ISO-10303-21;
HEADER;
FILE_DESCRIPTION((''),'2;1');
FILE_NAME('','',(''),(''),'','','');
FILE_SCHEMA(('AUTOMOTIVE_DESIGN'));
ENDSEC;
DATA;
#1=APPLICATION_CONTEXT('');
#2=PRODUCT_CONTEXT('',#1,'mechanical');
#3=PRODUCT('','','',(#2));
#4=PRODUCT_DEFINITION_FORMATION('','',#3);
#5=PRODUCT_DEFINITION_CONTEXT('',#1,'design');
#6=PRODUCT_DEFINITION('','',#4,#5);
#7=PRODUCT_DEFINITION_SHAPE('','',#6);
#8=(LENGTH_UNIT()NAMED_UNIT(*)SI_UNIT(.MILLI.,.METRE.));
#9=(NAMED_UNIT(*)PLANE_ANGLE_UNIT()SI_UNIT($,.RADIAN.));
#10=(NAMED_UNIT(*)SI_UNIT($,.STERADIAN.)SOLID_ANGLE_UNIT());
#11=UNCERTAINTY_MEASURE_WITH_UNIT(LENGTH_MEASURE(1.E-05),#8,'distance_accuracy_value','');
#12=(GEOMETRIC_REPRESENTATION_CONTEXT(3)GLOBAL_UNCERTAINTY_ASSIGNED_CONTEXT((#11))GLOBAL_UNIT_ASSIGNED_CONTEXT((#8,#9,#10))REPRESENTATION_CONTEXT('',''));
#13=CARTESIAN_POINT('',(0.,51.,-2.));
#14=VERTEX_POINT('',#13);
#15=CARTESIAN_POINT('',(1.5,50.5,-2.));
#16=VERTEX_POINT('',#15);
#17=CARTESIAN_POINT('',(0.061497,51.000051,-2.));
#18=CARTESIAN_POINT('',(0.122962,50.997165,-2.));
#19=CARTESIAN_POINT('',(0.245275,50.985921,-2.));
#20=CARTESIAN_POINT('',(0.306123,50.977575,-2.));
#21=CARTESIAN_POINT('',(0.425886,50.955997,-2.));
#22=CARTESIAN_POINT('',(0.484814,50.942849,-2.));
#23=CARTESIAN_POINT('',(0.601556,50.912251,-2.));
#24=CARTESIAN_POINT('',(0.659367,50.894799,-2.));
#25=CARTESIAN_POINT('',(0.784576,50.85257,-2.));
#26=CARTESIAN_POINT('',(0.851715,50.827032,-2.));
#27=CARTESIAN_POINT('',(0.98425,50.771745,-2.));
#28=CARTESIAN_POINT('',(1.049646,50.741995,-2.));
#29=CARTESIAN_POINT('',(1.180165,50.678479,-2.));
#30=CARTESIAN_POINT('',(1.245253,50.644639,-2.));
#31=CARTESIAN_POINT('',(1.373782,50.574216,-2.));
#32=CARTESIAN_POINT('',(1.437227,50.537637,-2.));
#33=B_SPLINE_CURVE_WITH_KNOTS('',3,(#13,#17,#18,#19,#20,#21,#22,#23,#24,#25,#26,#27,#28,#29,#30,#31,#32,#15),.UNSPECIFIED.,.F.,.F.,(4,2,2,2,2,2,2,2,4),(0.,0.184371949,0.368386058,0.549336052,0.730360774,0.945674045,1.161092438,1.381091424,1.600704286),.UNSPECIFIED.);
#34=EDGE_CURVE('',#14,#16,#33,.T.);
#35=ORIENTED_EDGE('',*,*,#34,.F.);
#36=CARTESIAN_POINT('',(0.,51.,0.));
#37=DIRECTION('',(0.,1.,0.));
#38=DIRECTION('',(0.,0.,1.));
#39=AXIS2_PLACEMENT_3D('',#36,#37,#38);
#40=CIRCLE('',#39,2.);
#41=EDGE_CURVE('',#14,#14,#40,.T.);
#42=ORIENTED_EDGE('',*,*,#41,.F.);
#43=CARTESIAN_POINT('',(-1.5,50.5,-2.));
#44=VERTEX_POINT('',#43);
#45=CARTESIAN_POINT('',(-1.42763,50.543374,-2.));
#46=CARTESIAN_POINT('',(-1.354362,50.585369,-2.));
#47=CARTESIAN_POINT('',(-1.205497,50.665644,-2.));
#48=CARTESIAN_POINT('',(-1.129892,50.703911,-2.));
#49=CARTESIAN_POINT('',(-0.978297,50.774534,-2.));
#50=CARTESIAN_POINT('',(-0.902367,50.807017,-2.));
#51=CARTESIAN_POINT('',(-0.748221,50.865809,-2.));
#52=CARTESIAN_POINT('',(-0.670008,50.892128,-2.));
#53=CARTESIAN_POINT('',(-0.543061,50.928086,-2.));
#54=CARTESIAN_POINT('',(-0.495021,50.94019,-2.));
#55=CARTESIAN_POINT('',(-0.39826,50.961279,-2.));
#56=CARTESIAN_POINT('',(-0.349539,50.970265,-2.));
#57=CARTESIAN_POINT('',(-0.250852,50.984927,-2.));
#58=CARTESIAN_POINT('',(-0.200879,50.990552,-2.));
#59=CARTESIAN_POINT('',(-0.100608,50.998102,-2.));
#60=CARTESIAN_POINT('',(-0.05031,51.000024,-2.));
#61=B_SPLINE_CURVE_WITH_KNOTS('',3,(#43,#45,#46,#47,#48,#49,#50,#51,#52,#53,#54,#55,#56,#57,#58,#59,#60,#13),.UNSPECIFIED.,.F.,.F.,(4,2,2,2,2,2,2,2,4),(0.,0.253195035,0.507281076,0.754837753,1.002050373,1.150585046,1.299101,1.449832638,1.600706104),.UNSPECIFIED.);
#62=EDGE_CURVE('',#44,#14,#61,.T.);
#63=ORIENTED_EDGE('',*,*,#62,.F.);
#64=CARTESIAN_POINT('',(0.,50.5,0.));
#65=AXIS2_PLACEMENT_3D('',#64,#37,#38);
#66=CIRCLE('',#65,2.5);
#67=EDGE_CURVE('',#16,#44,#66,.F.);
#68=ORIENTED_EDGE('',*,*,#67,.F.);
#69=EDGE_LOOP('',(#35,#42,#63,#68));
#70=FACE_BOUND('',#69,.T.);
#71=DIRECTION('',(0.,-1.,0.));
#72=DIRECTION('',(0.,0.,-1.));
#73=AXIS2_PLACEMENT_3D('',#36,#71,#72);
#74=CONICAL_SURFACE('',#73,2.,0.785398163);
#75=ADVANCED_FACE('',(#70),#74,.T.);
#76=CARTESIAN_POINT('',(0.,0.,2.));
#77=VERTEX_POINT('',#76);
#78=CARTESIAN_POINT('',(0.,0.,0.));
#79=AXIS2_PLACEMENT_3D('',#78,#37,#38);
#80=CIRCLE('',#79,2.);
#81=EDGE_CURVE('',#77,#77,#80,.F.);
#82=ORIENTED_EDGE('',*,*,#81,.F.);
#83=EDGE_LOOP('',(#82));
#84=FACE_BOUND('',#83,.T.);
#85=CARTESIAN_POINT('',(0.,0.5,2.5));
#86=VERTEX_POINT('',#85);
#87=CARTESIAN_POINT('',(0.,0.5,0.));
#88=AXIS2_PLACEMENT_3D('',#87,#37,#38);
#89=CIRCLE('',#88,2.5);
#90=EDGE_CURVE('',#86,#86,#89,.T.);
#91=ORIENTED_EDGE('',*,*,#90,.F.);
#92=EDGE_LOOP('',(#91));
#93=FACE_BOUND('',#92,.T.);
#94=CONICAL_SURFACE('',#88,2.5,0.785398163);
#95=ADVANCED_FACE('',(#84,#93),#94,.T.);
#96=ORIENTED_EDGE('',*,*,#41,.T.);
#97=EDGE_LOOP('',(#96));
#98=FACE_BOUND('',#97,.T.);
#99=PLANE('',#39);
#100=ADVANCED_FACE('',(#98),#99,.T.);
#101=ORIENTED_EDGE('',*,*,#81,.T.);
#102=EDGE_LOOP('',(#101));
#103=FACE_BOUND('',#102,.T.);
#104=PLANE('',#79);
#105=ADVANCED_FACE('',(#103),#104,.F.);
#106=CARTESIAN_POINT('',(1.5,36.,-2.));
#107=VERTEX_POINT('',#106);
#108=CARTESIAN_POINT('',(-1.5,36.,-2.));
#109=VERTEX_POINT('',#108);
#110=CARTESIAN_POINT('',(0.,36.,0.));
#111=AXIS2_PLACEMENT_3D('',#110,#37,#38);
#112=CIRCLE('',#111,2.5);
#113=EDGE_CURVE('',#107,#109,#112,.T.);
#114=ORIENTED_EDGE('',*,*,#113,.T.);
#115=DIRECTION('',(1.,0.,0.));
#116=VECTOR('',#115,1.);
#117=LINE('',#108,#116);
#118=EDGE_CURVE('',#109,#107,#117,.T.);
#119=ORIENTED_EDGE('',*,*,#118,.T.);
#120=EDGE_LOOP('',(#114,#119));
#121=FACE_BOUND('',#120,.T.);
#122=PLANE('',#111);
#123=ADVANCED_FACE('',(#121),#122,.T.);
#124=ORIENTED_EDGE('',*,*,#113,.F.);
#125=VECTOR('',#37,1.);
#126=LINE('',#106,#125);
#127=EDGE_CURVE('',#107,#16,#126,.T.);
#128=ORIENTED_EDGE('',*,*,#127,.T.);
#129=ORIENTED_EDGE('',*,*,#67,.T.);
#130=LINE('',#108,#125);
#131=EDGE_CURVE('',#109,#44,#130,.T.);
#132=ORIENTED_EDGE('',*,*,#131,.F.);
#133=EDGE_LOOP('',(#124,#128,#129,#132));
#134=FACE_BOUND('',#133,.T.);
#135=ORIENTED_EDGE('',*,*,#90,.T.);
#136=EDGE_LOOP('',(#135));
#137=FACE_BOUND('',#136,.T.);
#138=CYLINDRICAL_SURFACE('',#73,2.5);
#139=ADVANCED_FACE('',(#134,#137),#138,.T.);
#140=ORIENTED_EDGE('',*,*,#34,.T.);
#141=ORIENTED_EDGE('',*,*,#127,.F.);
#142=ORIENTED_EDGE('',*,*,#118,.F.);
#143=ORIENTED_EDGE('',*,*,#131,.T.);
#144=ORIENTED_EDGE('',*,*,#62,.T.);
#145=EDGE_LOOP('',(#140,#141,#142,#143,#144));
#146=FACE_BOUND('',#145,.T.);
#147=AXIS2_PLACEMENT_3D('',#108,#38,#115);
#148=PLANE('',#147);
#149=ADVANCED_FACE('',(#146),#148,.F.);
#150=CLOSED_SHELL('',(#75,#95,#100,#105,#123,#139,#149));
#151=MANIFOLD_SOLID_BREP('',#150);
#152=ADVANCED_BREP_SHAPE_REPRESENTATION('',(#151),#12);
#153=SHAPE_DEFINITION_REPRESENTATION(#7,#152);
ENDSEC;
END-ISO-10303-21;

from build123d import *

# Parameters (mm, degrees)
SKETCH_1_R          = 2.5
EXTRUDE_1_DEPTH     = 51
CUT_EXTRUDE_START   = -15
CUT_EXTRUDE_1_DEPTH = 15
CHAMFER_1_SIZE      = 0.5


with BuildPart() as part:
    # Эскиз1 → Бобышка-Вытянуть1 (new body)
    with BuildSketch(Plane(origin=(0, 0, 0), x_dir=(1, 0, 0), z_dir=(0, 1, 0))):
        with Locations(Location((0, 0, 0), (0, 0, 270))):
            Circle(SKETCH_1_R)
    extrude(amount=EXTRUDE_1_DEPTH)

    # Эскиз2 → Вырез-Вытянуть1 (cut)
    with BuildSketch(Plane(origin=(0, 51, 0), x_dir=(1, 0, 0), z_dir=(0, 1, 0)).offset(CUT_EXTRUDE_START)):
        with BuildLine():
            Line((-1.5, 2), (1.5, 2))
            ThreePointArc((1.5, 2), (0, 2.5), (-1.5, 2))
        make_face()
    extrude(amount=CUT_EXTRUDE_1_DEPTH, mode=Mode.SUBTRACT)

    # Фаска1
    chamfer_1_edges = [part.edges().sort_by_distance(p)[0] for p in [
        (-2.371708245, 51, 0.790569415),
        (0, 0, -2.5),
    ]]
    chamfer(chamfer_1_edges, length=CHAMFER_1_SIZE - 0.0001)  # a hair under: the kernel refuses the full size


solid = part.part
